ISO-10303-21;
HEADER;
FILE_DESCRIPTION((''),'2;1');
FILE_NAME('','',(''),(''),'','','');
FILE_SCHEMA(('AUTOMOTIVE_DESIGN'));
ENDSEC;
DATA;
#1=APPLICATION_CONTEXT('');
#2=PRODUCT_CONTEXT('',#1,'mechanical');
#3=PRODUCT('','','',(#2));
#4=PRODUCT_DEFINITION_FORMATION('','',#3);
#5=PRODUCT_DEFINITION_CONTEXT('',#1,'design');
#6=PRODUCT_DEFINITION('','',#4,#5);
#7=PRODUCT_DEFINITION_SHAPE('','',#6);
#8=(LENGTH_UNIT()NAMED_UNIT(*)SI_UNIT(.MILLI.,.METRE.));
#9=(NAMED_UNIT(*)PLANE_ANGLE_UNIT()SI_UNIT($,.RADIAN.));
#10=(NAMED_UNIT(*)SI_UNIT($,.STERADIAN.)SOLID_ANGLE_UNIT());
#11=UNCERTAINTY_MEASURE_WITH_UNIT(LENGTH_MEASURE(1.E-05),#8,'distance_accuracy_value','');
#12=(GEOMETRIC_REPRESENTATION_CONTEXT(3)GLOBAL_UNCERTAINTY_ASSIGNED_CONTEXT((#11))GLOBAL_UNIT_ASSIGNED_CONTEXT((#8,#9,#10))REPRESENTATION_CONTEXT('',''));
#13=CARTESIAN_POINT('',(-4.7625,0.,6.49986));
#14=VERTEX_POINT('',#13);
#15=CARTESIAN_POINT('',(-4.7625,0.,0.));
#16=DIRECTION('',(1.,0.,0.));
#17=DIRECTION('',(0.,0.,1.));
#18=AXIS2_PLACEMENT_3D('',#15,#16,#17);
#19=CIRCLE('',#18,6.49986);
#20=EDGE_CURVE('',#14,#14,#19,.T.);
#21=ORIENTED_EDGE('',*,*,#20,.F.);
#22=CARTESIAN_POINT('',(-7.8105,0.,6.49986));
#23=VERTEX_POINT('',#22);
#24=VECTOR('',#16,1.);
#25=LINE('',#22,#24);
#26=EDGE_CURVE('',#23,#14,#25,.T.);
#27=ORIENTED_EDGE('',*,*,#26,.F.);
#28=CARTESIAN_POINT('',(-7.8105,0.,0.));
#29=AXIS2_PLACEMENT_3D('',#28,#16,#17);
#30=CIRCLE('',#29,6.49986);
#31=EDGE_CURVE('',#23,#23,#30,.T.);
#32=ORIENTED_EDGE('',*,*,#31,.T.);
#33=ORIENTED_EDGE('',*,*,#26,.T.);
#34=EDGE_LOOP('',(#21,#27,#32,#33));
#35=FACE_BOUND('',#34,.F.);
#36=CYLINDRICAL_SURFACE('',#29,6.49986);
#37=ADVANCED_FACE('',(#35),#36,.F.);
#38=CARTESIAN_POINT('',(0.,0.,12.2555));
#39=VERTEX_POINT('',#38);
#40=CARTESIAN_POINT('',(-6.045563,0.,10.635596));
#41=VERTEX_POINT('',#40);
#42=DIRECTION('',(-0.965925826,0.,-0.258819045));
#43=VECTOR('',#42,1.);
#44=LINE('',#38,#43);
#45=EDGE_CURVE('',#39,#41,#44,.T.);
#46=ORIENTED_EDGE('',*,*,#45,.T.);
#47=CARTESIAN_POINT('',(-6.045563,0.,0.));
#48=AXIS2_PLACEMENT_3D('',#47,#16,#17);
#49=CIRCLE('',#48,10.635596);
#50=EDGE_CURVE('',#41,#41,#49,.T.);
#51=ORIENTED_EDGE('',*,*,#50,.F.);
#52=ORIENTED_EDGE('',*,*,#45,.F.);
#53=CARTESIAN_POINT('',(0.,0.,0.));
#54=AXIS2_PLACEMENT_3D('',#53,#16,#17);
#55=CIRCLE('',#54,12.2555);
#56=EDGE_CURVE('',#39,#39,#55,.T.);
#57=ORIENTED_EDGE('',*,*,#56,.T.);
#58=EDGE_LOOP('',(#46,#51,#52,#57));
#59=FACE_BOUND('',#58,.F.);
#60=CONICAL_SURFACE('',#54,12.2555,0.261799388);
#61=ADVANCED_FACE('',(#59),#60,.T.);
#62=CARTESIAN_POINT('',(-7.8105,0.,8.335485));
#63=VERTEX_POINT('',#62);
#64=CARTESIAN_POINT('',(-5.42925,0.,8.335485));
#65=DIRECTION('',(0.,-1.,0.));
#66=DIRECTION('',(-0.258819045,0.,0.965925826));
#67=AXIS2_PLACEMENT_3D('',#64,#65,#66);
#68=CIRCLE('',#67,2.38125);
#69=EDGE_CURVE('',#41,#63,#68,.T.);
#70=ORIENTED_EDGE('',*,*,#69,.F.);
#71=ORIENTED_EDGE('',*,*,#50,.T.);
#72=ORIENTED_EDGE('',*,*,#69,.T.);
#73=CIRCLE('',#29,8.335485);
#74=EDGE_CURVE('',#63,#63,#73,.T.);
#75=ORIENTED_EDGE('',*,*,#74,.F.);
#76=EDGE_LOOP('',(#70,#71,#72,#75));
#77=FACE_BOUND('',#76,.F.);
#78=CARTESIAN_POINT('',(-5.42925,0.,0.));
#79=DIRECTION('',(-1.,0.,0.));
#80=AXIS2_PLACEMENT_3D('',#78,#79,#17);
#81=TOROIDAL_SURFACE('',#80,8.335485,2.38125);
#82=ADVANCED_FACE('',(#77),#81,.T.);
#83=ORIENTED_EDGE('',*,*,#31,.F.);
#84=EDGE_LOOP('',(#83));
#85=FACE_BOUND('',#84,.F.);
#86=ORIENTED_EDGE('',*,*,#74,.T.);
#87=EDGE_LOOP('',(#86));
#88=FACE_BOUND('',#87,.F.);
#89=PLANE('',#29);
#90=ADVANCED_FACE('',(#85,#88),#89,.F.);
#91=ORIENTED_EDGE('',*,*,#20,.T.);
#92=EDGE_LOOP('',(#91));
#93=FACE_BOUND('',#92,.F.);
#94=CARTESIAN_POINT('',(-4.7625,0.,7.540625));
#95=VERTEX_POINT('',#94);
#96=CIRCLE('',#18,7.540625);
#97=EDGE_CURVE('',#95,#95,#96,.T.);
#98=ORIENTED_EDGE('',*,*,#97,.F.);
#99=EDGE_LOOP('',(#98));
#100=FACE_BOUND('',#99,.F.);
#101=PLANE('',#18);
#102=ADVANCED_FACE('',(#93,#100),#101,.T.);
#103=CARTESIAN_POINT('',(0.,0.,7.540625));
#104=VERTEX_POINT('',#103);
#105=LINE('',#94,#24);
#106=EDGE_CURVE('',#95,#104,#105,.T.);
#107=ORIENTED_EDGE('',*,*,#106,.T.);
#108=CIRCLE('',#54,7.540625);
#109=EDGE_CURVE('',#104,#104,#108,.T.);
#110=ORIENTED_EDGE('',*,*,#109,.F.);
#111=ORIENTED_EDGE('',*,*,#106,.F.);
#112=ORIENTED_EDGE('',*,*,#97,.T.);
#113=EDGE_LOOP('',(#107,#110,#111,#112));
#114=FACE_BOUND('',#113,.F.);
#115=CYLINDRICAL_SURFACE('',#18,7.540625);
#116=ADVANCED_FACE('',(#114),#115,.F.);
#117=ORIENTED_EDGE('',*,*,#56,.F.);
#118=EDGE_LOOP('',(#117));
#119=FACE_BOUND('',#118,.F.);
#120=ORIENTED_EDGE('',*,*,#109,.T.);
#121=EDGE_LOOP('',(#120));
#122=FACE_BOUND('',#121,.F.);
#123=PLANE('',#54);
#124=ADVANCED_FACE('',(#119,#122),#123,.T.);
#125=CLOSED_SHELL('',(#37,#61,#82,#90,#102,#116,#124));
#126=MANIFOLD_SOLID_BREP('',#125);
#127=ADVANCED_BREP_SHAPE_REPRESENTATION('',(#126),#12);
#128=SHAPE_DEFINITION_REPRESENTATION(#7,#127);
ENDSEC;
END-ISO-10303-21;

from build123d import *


# Not quite as in the source:
# - a feature names something its author has since deleted; it is built from what else it names


with BuildPart() as f1:
    # F0 (on Front) → F1 (revolve)
    with BuildSketch(Plane.XZ):
        with BuildLine():
            Line((0, 7.540625), (0, 12.2555))
            Line((0, 12.2555), (-6.0455628512, 10.6355963162))
            ThreePointArc((-6.0455628512, 10.6355963162), (-7.3184226416, 9.7850985952), (-7.8105, 8.3354854424))
            Line((-7.8105, 8.3354854424), (-7.8105, 6.49986))
            Line((-7.8105, 6.49986), (-4.7625, 6.49986))
            Line((-4.7625, 6.49986), (-4.7625, 7.540625))
            Line((-4.7625, 7.540625), (0, 7.540625))
        make_face()
    revolve(axis=Axis((5.2561350167, 0, 0), (1, 0, 0)))


solid = f1.part
